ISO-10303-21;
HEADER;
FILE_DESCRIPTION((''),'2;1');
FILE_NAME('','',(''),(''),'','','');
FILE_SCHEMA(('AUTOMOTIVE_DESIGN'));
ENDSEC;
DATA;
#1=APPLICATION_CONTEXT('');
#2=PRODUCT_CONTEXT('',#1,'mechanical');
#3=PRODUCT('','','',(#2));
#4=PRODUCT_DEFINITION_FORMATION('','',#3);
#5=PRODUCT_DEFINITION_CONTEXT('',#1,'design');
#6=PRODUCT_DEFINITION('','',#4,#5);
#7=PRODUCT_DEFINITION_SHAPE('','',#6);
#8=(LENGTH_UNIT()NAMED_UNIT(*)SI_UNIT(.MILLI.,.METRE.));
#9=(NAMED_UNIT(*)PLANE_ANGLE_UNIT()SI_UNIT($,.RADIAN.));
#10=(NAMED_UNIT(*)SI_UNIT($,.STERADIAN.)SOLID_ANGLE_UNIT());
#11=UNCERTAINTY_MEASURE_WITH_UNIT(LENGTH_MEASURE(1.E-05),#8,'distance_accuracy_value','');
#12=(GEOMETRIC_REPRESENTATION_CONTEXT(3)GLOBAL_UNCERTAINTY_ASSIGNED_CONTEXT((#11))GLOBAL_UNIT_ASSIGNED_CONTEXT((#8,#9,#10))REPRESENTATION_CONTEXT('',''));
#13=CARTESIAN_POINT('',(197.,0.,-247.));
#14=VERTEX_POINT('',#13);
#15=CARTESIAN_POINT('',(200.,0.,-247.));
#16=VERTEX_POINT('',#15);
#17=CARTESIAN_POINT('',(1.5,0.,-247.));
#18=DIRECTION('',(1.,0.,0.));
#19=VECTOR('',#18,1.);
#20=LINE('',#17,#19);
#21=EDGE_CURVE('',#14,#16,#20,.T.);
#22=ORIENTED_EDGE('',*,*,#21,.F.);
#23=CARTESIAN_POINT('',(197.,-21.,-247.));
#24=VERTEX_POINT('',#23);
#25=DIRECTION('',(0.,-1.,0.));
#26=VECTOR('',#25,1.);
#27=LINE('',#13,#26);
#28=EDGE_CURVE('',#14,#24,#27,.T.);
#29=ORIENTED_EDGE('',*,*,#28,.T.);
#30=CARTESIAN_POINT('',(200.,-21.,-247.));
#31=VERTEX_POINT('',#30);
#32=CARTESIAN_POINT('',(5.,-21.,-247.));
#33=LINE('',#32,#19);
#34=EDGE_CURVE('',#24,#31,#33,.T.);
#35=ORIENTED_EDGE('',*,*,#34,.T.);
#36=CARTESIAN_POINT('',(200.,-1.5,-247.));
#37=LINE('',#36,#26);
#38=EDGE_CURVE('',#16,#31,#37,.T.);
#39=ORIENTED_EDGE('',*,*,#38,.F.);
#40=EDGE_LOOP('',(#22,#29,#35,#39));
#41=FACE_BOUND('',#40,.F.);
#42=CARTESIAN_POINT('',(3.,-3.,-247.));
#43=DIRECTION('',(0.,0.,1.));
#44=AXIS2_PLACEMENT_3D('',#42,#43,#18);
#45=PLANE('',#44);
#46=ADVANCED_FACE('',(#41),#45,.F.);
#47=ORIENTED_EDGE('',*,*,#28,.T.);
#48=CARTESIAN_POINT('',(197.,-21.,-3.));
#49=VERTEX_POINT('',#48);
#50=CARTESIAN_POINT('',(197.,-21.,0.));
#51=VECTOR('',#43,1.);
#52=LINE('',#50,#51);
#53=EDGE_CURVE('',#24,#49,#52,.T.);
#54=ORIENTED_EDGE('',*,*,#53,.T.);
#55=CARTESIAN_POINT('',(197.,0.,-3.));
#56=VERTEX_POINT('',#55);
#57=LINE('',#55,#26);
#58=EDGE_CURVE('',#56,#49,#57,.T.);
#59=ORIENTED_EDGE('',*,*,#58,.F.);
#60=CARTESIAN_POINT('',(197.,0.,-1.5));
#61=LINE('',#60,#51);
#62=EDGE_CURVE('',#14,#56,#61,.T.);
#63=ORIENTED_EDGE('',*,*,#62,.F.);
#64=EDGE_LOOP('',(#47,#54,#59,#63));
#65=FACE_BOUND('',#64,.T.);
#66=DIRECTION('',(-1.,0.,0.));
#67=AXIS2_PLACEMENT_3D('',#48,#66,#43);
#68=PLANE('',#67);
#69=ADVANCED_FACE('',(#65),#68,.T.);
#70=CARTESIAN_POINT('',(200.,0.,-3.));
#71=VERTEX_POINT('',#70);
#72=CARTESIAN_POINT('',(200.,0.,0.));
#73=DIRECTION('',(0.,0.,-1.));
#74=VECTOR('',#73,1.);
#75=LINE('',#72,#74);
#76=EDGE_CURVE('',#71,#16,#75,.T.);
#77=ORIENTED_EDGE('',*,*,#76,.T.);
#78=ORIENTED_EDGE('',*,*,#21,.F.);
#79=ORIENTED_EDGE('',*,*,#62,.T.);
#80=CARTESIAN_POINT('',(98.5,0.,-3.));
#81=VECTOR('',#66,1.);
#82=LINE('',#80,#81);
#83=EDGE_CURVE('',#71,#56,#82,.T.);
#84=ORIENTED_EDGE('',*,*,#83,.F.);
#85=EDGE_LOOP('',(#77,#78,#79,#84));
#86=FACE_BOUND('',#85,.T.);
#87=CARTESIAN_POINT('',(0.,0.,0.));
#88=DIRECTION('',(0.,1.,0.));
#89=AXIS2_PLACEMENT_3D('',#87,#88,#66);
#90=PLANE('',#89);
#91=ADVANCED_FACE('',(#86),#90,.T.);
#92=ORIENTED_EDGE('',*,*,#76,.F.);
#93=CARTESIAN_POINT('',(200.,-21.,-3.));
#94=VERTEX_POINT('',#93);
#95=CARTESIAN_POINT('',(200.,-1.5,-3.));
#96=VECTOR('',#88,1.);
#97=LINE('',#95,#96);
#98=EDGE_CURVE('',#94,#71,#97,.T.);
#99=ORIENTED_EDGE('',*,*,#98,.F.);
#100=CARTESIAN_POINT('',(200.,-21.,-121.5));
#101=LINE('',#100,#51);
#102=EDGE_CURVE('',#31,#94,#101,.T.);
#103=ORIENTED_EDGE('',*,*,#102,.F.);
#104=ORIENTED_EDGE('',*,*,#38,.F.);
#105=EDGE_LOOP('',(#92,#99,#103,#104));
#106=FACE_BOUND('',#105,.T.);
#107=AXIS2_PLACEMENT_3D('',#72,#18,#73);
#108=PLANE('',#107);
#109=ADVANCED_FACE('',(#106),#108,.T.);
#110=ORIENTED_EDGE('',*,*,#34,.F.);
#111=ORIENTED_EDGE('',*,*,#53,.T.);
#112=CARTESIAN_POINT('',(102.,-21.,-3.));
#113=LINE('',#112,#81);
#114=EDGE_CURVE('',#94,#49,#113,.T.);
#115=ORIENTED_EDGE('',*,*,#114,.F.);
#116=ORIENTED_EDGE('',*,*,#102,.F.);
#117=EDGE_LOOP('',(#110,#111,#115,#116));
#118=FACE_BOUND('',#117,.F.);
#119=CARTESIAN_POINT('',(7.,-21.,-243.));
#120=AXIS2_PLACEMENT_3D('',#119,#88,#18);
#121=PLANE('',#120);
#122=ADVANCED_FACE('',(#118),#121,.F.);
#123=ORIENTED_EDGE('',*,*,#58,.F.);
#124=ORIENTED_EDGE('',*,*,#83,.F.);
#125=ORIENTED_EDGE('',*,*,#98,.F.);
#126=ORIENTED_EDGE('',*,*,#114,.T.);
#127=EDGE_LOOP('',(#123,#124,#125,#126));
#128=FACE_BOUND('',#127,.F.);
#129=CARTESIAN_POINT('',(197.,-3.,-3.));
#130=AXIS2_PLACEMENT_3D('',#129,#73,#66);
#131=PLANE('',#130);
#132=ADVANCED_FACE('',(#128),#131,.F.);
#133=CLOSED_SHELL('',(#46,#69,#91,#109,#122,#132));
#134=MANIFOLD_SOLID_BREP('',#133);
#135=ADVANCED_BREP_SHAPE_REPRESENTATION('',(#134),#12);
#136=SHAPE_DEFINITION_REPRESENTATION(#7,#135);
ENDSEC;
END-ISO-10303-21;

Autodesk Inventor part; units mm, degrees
ref_plane "YZ Plane" through (0, 0, 0) normal (1, 0, 0) x (0, 1, 0)
ref_plane "XZ Plane" through (0, 0, 0) normal (0, 1, 0) x (-1, 0, 0)
ref_plane "XY Plane" through (0, 0, 0) normal (0, 0, 1) x (1, 0, 0)
sketch "block" plane through (0, 0, 0) normal (0, 1, 0) x (-1, 0, 0)
  line L0 (0, 0) -> (-200, 0)
  line L1 (-200, 0) -> (-200, -250)
  line L2 (-200, -250) -> (0, -250)
  line L3 (0, -250) -> (0, 0)
  dimension "d31" = 200
  dimension "d32" = 250
extrude "ext_block" add sketch "block" against normal blind 24
shell "Shell2" thickness 3 removed faces 0
sketch "lines_base" plane through (0, 0, 0) normal (0, 1, 0) x (-1, 0, 0)
  line L0 (0, 0) -> (-200, 0)
  line L1 (-200, 0) -> (-200, -250)
  line L2 (-200, -250) -> (0, -250)
  line L3 (0, -250) -> (0, 0)
  circle A0 centre (-65, -60) radius 6
  circle A1 centre (-125, -80) radius 6
  circle A2 centre (-65, -60) radius 12.5
  circle A3 centre (-65, -60) radius 8.5
  circle A4 centre (-125, -80) radius 8.5
  circle A5 centre (-125, -80) radius 12.5
  circle A6 centre (-175, -125) radius 3
  line L4 (-175, -125) -> (-175, -209)
  line L5 (-175, -125) -> (-91, -125) construction
  circle A7 centre (-175, -139) radius 3
  circle A8 centre (-175, -153) radius 3
  circle A9 centre (-175, -167) radius 3
  circle A10 centre (-175, -181) radius 3
  circle A11 centre (-175, -195) radius 3
  circle A12 centre (-175, -209) radius 3
  circle A13 centre (-95, -185) radius 2.5
  circle A14 centre (-95, -185) radius 5
  point P0 (-200, -125)
  dimension "d0" = 200
  dimension "d1" = 250
  dimension "d2" = 12
  dimension "d3" = 12
  dimension "d4" = 25
  dimension "d5" = 17
  dimension "d6" = 17
  dimension "d7" = 25
  dimension "d8" = 75
  dimension "d9" = 80
  dimension "d10" = 65
  dimension "d11" = 60
  dimension "d12" = 6
  dimension "d13" = 84
  dimension "d14" = 90
  dimension "d15" = 25
  dimension "d16" = 125
  dimension "d19" = 14
  dimension "d24" = 5
  dimension "d25" = 10
  dimension "d26" = 65
  dimension "d27" = 95
extrude "holes" cut sketch "lines_base" against normal up to surface (3 mm away) contours A0 | A1 | A6 | A7 L4 | L4 A7 | A8 L4 | L4 A8 | A9 L4 | L4 A9 | A10 L4 | L4 A10 | A11 L4 | L4 A11 | A12 | A13
sketch "Sketch4" plane through (200, 0, -250) normal (0, 0, -1) x (-1, 0, 0)
  line L0 (188, -4) -> (169, -4)
  line L1 (169, -4) -> (169, -17)
  line L2 (169, -17) -> (188, -17)
  line L3 (188, -17) -> (188, -4)
  line L4 (0, 0) -> (200, 0) projected
  line L5 (200, 0) -> (200, -24) projected
  dimension "d40" = 19
  dimension "d41" = 13
  dimension "d42" = 4
  dimension "d43" = 12
extrude "pwr_button_hole" cut sketch "Sketch4" against normal up to surface (3 mm away)
ref_plane "Work Plane1" through (7, -21, -243) normal (0, 1, 0) x (1, 0, 0)
sketch "Sketch5" plane through (7, -21, -243) normal (0, 1, 0) x (1, 0, 0)
  line L0 (-20.9366, 21.7948) -> (229.9216, 21.7948)
  line L1 (229.9216, 21.7948) -> (229.9216, -260.9184)
  line L2 (229.9216, -260.9184) -> (-20.9366, -260.9184)
  line L3 (-20.9366, -260.9184) -> (-20.9366, 21.7948)
  point P0 (-7, -243)
extrude "back_cover_cut" cut sketch "Sketch5" against normal through all
sketch "Sketch10" plane through (197, -3, -3) normal (0, 0, -1) x (-1, 0, 0)
  line L0 (-36.7403, 38.8931) -> (239.3233, 38.8931)
  line L1 (239.3233, 38.8931) -> (239.3233, -48.8023)
  line L2 (239.3233, -48.8023) -> (-36.7403, -48.8023)
  line L3 (-36.7403, -48.8023) -> (-36.7403, 38.8931)
  point P0 (197, 3)
extrude "Extrusion8" cut sketch "Sketch10" against normal blind 10
sketch "Sketch11" plane through (3, -3, -247) normal (0, 0, 1) x (1, 0, 0)
  line L0 (-15.7564, 16.4959) -> (212.749, 16.4959)
  line L1 (212.749, 16.4959) -> (212.749, -33.4204)
  line L2 (212.749, -33.4204) -> (-15.7564, -33.4204)
  line L3 (-15.7564, -33.4204) -> (-15.7564, 16.4959)
  point P0 (-3, 3)
extrude "Extrusion9" cut sketch "Sketch11" against normal blind 10
sketch "Sketch12" plane through (197, -21, -3) normal (-1, 0, 0) x (0, 0, 1)
  line L0 (-265.2535, 43.7396) -> (74.9163, 43.7396)
  line L1 (74.9163, 43.7396) -> (74.9163, -33.9078)
  line L2 (74.9163, -33.9078) -> (-265.2535, -33.9078)
  line L3 (-265.2535, -33.9078) -> (-265.2535, 43.7396)
  point P0 (3, 21)
extrude "Extrusion10" cut sketch "Sketch12" along normal through all
properties part number "back_botton" material "Glass"
